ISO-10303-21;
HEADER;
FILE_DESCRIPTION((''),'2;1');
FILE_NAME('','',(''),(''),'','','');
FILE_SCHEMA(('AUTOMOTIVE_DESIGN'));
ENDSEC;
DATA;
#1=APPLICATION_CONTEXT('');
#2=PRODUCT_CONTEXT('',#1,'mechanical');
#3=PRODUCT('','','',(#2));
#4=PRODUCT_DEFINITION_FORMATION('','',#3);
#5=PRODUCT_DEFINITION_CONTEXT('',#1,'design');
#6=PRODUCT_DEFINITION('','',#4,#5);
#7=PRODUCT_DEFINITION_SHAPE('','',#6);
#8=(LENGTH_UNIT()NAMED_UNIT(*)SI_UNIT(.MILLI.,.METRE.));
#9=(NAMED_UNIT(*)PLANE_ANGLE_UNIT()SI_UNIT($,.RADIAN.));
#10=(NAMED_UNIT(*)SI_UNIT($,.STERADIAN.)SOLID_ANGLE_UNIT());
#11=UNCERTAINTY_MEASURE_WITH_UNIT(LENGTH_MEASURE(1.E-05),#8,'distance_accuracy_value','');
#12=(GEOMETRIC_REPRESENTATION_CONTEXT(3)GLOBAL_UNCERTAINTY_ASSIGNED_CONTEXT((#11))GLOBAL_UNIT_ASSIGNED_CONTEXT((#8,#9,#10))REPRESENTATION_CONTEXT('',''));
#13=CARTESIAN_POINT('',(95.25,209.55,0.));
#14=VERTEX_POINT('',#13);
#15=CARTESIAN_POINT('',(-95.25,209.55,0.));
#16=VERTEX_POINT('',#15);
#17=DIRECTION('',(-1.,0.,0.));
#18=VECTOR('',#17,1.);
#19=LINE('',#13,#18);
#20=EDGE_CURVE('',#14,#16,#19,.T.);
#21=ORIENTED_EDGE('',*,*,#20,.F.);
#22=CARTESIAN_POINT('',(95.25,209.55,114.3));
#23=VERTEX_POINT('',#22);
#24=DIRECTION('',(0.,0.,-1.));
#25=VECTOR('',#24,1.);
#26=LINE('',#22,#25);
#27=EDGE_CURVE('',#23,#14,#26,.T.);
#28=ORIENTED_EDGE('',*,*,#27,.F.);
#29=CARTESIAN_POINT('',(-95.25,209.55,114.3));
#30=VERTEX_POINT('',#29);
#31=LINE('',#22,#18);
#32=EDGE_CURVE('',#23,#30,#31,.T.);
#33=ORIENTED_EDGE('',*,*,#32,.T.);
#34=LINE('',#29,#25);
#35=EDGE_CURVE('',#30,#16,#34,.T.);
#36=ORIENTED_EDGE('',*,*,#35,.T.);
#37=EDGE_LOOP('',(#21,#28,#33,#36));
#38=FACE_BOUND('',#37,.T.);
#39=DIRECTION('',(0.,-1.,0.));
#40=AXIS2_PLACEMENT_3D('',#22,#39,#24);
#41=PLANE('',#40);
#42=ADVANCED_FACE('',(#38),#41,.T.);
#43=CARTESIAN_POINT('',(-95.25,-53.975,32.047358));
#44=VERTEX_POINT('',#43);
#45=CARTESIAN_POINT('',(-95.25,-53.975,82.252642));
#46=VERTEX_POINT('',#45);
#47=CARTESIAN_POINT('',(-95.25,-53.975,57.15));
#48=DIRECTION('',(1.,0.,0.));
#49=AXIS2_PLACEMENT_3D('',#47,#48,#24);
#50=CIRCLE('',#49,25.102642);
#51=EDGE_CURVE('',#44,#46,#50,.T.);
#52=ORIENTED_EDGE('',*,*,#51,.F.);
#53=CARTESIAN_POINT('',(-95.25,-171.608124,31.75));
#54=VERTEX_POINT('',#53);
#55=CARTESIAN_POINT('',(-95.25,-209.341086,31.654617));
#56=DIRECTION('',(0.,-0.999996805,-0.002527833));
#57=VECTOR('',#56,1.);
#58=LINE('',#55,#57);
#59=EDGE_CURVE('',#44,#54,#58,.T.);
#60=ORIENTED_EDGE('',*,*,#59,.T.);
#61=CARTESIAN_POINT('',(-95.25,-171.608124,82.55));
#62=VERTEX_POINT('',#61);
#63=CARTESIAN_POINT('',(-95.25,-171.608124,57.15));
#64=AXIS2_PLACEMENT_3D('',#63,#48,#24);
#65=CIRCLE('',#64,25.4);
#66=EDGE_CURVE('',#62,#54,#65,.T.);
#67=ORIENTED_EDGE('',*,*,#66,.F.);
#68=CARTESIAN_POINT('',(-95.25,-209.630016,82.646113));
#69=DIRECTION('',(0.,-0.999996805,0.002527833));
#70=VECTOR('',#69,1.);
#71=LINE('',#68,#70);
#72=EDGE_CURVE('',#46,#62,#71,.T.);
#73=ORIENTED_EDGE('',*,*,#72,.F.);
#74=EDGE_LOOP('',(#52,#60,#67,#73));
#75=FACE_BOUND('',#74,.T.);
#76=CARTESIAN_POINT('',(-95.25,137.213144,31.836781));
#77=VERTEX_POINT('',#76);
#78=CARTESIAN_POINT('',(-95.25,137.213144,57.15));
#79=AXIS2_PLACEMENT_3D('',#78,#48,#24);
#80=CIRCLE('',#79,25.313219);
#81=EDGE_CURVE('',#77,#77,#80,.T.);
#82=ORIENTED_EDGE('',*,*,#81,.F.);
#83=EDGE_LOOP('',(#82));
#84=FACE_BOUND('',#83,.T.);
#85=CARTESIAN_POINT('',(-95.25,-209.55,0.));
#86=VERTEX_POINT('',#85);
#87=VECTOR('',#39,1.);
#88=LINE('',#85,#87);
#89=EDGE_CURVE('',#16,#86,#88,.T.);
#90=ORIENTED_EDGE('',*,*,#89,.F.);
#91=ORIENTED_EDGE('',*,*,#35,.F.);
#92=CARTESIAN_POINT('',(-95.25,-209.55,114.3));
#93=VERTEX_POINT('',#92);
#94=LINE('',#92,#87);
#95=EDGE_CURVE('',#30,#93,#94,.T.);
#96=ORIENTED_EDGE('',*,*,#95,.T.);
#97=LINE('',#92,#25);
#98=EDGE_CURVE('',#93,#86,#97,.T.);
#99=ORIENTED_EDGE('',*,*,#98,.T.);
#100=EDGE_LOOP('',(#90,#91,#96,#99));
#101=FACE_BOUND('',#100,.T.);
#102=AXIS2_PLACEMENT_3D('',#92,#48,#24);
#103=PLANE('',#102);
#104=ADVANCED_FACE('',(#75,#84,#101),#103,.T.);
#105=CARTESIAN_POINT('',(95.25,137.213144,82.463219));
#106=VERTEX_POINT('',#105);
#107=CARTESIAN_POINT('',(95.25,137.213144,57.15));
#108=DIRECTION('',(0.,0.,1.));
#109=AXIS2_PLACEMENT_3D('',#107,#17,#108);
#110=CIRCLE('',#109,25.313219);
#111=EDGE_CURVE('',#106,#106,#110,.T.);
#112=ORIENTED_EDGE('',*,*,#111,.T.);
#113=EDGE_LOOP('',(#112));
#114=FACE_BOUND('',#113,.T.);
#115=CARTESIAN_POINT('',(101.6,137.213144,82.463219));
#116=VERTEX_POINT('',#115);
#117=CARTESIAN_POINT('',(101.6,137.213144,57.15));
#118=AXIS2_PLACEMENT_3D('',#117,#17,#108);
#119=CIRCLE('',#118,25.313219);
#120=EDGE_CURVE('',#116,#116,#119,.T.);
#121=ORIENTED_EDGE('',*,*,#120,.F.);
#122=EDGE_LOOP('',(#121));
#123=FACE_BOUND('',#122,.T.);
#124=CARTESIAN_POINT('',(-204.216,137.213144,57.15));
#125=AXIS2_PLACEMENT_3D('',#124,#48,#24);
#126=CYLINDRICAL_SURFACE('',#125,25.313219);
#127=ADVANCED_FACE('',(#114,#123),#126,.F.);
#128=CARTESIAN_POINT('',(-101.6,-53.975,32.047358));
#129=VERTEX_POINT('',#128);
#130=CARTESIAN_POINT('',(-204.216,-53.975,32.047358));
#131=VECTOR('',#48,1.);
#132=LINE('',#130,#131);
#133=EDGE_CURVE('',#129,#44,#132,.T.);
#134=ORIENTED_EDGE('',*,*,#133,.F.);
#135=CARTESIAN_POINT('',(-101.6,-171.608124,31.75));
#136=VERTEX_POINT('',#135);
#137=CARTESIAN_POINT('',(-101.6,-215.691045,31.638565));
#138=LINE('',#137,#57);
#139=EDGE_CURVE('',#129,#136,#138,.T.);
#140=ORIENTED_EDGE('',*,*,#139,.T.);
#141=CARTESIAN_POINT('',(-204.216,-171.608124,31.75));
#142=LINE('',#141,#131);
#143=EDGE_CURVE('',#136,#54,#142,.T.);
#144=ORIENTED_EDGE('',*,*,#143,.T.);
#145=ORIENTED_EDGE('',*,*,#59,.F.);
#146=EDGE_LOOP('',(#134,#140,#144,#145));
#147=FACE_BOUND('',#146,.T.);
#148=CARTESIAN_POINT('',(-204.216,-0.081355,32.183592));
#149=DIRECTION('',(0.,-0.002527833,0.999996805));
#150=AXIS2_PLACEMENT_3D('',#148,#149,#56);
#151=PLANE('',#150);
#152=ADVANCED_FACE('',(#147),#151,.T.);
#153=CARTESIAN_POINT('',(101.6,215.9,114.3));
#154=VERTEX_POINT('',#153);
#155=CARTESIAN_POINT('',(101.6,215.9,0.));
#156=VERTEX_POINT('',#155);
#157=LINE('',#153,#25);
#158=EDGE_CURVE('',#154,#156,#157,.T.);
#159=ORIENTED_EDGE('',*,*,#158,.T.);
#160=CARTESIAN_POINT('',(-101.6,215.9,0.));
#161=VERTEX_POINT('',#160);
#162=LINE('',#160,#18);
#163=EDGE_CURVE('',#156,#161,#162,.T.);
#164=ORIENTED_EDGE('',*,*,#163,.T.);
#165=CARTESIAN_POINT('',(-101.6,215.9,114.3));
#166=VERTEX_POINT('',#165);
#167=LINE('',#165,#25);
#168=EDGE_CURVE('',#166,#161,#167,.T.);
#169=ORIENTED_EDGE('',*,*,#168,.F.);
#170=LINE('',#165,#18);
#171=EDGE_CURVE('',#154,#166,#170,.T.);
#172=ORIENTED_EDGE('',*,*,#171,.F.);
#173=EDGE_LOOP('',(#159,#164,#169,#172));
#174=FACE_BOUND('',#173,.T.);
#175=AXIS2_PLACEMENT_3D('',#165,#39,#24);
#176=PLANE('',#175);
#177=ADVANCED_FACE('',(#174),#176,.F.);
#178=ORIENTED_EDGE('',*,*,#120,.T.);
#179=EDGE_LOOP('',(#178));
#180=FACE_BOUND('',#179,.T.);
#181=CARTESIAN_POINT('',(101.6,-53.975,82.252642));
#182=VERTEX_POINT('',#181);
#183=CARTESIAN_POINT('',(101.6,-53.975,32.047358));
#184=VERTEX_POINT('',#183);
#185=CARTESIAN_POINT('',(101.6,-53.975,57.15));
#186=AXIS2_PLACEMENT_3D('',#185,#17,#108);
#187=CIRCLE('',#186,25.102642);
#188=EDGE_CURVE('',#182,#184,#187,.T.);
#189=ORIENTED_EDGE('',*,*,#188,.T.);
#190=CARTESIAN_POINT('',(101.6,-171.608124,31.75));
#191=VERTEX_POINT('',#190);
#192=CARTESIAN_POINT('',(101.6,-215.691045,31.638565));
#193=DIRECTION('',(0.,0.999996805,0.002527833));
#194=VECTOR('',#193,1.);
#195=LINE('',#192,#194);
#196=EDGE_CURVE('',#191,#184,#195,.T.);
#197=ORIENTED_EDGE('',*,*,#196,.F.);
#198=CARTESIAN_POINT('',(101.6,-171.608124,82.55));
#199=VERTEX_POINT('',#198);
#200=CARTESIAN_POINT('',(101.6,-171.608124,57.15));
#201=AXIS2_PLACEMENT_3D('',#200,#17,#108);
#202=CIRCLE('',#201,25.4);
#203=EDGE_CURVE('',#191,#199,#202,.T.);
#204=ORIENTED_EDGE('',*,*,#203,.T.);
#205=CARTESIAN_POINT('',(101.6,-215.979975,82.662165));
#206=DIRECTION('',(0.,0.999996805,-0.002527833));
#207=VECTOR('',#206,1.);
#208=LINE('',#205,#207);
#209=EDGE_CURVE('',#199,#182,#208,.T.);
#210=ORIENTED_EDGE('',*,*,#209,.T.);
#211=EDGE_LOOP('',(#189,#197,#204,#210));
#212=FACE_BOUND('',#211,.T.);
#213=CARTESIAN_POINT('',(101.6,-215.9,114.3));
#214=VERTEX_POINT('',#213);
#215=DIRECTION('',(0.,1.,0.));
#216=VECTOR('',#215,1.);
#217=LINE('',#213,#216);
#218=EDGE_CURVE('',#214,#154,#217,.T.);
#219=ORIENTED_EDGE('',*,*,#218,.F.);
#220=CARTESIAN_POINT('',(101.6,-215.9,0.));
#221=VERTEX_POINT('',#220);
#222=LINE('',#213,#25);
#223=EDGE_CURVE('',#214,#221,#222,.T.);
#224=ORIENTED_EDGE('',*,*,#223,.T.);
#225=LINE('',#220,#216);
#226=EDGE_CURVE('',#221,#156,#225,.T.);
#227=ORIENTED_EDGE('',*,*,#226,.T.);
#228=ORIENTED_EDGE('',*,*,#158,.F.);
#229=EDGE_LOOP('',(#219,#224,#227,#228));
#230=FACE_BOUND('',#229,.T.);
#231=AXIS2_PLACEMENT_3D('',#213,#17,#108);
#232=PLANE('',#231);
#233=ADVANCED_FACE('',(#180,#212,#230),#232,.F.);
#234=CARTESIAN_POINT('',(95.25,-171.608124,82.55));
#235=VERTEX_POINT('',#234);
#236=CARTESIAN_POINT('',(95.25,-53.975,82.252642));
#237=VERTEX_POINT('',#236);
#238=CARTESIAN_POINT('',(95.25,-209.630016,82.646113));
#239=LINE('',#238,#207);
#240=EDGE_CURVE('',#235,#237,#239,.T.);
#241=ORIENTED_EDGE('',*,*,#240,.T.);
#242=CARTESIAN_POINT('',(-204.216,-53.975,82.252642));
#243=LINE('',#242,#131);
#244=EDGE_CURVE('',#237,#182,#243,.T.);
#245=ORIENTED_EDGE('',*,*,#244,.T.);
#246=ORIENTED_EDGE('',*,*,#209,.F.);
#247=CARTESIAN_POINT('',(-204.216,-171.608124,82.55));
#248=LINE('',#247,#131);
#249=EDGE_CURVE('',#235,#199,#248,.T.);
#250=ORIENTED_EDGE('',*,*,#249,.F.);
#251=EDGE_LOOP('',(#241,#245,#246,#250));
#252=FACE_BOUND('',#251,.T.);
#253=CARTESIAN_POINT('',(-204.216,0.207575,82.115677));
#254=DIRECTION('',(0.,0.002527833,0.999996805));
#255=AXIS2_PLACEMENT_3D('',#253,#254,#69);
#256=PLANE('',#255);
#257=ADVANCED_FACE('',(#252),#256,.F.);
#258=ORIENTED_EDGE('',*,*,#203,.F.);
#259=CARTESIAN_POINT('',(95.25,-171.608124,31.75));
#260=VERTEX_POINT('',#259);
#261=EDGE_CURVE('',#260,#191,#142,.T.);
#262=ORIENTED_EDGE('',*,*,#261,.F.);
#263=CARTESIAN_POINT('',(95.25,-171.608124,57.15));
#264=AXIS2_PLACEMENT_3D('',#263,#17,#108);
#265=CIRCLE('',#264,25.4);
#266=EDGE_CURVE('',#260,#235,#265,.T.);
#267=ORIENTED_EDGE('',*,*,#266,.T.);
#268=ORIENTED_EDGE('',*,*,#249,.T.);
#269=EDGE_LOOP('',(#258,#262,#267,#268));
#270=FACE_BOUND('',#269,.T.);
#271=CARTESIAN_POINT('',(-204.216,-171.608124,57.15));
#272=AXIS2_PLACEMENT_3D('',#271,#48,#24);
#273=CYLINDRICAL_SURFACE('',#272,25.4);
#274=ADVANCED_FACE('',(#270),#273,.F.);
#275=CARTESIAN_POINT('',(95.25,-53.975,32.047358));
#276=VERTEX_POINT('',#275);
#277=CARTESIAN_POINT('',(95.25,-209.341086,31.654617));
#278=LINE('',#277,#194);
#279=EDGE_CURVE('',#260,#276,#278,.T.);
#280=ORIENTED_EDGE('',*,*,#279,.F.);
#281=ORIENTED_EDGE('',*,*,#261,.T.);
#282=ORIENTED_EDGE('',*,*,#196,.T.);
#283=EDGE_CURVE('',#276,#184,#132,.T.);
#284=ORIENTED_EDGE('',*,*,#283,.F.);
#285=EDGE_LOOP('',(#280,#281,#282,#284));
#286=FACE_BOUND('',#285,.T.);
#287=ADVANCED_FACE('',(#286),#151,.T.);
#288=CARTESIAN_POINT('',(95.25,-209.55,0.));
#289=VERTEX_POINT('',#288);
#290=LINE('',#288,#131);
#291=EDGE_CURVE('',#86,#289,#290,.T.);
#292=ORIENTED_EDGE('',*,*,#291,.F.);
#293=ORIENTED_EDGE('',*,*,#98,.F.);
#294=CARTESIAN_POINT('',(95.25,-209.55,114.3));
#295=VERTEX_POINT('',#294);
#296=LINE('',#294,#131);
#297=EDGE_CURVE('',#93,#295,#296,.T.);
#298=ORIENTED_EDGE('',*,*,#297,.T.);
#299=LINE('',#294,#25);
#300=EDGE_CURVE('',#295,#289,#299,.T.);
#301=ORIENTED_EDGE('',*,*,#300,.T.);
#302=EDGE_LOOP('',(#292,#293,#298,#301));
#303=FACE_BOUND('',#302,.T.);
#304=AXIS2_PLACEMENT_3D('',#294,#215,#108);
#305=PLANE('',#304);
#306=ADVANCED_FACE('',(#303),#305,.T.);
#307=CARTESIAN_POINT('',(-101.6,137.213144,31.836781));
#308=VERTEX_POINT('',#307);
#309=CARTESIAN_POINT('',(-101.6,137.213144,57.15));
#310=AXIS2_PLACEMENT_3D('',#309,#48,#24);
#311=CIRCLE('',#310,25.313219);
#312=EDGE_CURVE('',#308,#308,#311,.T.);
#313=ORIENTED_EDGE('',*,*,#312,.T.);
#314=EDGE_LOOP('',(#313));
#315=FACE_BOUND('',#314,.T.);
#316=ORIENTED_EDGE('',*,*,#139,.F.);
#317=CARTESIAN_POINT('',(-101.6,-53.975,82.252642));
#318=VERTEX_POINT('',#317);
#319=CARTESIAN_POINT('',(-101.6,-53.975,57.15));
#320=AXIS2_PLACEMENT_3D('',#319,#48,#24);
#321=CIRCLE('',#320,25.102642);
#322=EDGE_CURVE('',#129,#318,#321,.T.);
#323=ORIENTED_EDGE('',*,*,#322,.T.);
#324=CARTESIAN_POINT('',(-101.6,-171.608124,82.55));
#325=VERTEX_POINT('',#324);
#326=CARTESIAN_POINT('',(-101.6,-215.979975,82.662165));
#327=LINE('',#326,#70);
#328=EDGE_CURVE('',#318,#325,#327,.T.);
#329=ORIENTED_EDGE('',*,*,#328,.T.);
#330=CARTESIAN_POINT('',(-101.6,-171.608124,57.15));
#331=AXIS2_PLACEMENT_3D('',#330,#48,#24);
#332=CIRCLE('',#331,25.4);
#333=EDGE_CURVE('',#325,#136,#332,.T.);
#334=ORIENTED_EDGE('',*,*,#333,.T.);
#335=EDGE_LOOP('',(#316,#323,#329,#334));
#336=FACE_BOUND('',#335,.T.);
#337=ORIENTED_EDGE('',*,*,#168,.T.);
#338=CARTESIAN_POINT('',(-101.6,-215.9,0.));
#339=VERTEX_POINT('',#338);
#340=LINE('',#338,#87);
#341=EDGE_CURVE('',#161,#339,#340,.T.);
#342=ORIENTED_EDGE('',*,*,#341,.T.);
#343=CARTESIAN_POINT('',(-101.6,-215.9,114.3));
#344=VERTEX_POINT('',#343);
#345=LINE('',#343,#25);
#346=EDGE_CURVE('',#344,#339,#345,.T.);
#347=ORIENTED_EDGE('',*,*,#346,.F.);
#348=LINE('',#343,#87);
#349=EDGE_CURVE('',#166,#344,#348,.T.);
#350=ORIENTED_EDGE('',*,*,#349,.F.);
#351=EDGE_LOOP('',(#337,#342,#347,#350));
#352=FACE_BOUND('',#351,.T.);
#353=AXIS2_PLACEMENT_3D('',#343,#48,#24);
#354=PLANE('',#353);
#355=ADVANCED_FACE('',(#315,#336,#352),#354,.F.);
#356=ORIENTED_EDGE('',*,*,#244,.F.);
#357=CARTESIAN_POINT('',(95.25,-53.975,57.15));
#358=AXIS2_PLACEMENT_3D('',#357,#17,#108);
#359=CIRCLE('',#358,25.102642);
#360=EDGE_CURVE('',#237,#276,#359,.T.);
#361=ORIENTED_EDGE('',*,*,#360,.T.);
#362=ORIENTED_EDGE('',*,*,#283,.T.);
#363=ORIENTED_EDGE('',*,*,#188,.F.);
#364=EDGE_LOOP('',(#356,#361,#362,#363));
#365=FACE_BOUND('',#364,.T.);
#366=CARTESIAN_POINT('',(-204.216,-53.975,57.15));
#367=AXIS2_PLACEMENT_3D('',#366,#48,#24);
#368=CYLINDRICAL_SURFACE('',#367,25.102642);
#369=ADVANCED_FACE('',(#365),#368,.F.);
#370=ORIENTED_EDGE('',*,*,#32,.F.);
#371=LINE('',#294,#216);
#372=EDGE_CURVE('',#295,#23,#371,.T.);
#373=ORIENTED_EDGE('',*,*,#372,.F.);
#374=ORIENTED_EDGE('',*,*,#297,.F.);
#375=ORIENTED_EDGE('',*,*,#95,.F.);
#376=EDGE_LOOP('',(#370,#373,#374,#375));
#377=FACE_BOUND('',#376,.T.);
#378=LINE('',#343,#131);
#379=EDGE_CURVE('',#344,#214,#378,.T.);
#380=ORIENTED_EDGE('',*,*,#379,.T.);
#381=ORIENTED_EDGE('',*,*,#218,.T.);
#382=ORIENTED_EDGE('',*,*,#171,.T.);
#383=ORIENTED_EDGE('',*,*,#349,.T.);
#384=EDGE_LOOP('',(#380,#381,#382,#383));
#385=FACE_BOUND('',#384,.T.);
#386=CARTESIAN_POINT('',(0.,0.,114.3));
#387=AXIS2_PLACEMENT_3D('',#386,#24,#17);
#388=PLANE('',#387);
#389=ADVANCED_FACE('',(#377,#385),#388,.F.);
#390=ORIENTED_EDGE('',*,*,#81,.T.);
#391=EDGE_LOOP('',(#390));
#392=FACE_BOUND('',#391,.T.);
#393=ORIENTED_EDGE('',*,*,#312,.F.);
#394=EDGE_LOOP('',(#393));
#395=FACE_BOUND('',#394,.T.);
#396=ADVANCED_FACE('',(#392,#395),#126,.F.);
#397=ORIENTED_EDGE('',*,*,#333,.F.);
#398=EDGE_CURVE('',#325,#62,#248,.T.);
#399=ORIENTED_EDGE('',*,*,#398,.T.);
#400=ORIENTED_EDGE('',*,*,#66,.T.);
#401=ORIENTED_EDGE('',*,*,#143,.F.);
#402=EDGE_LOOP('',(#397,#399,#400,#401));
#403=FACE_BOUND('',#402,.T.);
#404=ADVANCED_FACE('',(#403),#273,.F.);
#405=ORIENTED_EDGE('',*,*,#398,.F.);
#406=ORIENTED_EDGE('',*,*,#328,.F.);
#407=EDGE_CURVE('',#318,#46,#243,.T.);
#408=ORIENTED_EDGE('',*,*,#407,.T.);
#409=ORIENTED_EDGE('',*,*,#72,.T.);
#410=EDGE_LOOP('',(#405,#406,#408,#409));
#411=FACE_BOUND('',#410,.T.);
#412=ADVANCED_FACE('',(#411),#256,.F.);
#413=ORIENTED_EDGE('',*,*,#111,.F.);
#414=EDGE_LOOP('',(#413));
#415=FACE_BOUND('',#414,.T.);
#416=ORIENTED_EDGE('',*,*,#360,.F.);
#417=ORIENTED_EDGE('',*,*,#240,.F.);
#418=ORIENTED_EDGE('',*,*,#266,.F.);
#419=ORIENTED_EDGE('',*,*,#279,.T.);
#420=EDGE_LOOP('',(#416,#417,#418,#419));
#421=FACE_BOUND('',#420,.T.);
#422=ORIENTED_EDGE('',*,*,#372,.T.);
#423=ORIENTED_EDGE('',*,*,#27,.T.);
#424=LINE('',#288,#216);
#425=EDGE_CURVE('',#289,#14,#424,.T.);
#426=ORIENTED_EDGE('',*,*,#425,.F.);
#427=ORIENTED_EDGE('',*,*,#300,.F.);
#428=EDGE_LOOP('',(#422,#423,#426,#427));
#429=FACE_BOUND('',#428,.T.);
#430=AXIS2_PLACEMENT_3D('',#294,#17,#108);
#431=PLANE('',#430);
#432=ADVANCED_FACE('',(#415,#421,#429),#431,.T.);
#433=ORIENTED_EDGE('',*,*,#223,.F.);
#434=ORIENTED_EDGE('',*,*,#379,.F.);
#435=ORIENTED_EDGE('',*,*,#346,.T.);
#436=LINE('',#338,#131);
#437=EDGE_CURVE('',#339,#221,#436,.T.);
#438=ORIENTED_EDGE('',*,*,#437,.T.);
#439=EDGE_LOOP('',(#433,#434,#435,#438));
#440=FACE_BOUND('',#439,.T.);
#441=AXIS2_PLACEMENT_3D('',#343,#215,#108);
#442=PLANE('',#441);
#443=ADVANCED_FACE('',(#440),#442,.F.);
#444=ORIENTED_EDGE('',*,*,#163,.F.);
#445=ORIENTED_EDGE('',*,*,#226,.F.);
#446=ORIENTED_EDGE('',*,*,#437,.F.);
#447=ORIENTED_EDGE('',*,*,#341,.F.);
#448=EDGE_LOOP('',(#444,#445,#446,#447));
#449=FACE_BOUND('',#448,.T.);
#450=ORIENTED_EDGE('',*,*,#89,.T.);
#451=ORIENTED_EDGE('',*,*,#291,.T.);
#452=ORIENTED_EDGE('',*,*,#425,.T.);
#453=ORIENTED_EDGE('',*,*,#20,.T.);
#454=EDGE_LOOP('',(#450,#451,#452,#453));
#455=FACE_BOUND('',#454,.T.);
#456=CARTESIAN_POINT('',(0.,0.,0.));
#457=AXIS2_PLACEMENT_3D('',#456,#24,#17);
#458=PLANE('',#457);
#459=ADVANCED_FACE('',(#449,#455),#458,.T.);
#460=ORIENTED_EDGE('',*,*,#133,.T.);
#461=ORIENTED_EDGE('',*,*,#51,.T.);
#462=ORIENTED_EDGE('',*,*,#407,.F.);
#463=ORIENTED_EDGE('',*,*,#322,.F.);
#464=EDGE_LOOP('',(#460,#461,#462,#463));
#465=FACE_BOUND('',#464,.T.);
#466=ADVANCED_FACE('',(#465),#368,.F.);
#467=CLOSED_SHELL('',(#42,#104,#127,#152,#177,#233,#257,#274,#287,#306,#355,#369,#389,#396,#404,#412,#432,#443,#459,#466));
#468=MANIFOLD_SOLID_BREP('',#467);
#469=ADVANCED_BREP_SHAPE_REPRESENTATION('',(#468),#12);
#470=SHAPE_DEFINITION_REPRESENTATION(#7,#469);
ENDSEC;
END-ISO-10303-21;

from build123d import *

# Parameters (mm, degrees)
SKETCH1_W               = 203.2
SKETCH1_H               = 431.8
SKETCH1_W_2             = 190.5
SKETCH1_H_2             = 419.1
BOSS_EXTRUDE4_DEPTH     = 114.3
CUT_EXTRUDE3_DEPTH      = 141.986
CUT_EXTRUDE3_DEPTH_BACK = 204.216
SKETCH4_R               = 25.313218752


with BuildPart() as part:
    # Sketch1 → Boss-Extrude4 (new body)
    with BuildSketch(Plane.XY):
        Rectangle(SKETCH1_W, SKETCH1_H)
        Rectangle(SKETCH1_W_2, SKETCH1_H_2, mode=Mode.SUBTRACT)
    extrude(amount=BOSS_EXTRUDE4_DEPTH)

    # Sketch4 → Cut-Extrude3 (cut, two sides: drawn at the far end of the back side and taken through both)
    with BuildSketch(Plane(origin=(0, 0, 0), x_dir=(0, 0, -1), z_dir=(1, 0, 0)).offset(-CUT_EXTRUDE3_DEPTH_BACK)):
        with BuildLine():
            ThreePointArc((-32.047357803, -53.975), (-57.15, -28.872357803), (-82.252642197, -53.975))
            Line((-82.252642197, -53.975), (-82.55, -171.608124436))
            ThreePointArc((-82.55, -171.608124436), (-57.15, -197.008124436), (-31.75, -171.608124436))
            Line((-31.75, -171.608124436), (-32.047357803, -53.975))
        make_face()
        with Locations((-57.15, 137.213144343)):
            Circle(SKETCH4_R)
    extrude(amount=CUT_EXTRUDE3_DEPTH + CUT_EXTRUDE3_DEPTH_BACK, mode=Mode.SUBTRACT)


solid = part.part
